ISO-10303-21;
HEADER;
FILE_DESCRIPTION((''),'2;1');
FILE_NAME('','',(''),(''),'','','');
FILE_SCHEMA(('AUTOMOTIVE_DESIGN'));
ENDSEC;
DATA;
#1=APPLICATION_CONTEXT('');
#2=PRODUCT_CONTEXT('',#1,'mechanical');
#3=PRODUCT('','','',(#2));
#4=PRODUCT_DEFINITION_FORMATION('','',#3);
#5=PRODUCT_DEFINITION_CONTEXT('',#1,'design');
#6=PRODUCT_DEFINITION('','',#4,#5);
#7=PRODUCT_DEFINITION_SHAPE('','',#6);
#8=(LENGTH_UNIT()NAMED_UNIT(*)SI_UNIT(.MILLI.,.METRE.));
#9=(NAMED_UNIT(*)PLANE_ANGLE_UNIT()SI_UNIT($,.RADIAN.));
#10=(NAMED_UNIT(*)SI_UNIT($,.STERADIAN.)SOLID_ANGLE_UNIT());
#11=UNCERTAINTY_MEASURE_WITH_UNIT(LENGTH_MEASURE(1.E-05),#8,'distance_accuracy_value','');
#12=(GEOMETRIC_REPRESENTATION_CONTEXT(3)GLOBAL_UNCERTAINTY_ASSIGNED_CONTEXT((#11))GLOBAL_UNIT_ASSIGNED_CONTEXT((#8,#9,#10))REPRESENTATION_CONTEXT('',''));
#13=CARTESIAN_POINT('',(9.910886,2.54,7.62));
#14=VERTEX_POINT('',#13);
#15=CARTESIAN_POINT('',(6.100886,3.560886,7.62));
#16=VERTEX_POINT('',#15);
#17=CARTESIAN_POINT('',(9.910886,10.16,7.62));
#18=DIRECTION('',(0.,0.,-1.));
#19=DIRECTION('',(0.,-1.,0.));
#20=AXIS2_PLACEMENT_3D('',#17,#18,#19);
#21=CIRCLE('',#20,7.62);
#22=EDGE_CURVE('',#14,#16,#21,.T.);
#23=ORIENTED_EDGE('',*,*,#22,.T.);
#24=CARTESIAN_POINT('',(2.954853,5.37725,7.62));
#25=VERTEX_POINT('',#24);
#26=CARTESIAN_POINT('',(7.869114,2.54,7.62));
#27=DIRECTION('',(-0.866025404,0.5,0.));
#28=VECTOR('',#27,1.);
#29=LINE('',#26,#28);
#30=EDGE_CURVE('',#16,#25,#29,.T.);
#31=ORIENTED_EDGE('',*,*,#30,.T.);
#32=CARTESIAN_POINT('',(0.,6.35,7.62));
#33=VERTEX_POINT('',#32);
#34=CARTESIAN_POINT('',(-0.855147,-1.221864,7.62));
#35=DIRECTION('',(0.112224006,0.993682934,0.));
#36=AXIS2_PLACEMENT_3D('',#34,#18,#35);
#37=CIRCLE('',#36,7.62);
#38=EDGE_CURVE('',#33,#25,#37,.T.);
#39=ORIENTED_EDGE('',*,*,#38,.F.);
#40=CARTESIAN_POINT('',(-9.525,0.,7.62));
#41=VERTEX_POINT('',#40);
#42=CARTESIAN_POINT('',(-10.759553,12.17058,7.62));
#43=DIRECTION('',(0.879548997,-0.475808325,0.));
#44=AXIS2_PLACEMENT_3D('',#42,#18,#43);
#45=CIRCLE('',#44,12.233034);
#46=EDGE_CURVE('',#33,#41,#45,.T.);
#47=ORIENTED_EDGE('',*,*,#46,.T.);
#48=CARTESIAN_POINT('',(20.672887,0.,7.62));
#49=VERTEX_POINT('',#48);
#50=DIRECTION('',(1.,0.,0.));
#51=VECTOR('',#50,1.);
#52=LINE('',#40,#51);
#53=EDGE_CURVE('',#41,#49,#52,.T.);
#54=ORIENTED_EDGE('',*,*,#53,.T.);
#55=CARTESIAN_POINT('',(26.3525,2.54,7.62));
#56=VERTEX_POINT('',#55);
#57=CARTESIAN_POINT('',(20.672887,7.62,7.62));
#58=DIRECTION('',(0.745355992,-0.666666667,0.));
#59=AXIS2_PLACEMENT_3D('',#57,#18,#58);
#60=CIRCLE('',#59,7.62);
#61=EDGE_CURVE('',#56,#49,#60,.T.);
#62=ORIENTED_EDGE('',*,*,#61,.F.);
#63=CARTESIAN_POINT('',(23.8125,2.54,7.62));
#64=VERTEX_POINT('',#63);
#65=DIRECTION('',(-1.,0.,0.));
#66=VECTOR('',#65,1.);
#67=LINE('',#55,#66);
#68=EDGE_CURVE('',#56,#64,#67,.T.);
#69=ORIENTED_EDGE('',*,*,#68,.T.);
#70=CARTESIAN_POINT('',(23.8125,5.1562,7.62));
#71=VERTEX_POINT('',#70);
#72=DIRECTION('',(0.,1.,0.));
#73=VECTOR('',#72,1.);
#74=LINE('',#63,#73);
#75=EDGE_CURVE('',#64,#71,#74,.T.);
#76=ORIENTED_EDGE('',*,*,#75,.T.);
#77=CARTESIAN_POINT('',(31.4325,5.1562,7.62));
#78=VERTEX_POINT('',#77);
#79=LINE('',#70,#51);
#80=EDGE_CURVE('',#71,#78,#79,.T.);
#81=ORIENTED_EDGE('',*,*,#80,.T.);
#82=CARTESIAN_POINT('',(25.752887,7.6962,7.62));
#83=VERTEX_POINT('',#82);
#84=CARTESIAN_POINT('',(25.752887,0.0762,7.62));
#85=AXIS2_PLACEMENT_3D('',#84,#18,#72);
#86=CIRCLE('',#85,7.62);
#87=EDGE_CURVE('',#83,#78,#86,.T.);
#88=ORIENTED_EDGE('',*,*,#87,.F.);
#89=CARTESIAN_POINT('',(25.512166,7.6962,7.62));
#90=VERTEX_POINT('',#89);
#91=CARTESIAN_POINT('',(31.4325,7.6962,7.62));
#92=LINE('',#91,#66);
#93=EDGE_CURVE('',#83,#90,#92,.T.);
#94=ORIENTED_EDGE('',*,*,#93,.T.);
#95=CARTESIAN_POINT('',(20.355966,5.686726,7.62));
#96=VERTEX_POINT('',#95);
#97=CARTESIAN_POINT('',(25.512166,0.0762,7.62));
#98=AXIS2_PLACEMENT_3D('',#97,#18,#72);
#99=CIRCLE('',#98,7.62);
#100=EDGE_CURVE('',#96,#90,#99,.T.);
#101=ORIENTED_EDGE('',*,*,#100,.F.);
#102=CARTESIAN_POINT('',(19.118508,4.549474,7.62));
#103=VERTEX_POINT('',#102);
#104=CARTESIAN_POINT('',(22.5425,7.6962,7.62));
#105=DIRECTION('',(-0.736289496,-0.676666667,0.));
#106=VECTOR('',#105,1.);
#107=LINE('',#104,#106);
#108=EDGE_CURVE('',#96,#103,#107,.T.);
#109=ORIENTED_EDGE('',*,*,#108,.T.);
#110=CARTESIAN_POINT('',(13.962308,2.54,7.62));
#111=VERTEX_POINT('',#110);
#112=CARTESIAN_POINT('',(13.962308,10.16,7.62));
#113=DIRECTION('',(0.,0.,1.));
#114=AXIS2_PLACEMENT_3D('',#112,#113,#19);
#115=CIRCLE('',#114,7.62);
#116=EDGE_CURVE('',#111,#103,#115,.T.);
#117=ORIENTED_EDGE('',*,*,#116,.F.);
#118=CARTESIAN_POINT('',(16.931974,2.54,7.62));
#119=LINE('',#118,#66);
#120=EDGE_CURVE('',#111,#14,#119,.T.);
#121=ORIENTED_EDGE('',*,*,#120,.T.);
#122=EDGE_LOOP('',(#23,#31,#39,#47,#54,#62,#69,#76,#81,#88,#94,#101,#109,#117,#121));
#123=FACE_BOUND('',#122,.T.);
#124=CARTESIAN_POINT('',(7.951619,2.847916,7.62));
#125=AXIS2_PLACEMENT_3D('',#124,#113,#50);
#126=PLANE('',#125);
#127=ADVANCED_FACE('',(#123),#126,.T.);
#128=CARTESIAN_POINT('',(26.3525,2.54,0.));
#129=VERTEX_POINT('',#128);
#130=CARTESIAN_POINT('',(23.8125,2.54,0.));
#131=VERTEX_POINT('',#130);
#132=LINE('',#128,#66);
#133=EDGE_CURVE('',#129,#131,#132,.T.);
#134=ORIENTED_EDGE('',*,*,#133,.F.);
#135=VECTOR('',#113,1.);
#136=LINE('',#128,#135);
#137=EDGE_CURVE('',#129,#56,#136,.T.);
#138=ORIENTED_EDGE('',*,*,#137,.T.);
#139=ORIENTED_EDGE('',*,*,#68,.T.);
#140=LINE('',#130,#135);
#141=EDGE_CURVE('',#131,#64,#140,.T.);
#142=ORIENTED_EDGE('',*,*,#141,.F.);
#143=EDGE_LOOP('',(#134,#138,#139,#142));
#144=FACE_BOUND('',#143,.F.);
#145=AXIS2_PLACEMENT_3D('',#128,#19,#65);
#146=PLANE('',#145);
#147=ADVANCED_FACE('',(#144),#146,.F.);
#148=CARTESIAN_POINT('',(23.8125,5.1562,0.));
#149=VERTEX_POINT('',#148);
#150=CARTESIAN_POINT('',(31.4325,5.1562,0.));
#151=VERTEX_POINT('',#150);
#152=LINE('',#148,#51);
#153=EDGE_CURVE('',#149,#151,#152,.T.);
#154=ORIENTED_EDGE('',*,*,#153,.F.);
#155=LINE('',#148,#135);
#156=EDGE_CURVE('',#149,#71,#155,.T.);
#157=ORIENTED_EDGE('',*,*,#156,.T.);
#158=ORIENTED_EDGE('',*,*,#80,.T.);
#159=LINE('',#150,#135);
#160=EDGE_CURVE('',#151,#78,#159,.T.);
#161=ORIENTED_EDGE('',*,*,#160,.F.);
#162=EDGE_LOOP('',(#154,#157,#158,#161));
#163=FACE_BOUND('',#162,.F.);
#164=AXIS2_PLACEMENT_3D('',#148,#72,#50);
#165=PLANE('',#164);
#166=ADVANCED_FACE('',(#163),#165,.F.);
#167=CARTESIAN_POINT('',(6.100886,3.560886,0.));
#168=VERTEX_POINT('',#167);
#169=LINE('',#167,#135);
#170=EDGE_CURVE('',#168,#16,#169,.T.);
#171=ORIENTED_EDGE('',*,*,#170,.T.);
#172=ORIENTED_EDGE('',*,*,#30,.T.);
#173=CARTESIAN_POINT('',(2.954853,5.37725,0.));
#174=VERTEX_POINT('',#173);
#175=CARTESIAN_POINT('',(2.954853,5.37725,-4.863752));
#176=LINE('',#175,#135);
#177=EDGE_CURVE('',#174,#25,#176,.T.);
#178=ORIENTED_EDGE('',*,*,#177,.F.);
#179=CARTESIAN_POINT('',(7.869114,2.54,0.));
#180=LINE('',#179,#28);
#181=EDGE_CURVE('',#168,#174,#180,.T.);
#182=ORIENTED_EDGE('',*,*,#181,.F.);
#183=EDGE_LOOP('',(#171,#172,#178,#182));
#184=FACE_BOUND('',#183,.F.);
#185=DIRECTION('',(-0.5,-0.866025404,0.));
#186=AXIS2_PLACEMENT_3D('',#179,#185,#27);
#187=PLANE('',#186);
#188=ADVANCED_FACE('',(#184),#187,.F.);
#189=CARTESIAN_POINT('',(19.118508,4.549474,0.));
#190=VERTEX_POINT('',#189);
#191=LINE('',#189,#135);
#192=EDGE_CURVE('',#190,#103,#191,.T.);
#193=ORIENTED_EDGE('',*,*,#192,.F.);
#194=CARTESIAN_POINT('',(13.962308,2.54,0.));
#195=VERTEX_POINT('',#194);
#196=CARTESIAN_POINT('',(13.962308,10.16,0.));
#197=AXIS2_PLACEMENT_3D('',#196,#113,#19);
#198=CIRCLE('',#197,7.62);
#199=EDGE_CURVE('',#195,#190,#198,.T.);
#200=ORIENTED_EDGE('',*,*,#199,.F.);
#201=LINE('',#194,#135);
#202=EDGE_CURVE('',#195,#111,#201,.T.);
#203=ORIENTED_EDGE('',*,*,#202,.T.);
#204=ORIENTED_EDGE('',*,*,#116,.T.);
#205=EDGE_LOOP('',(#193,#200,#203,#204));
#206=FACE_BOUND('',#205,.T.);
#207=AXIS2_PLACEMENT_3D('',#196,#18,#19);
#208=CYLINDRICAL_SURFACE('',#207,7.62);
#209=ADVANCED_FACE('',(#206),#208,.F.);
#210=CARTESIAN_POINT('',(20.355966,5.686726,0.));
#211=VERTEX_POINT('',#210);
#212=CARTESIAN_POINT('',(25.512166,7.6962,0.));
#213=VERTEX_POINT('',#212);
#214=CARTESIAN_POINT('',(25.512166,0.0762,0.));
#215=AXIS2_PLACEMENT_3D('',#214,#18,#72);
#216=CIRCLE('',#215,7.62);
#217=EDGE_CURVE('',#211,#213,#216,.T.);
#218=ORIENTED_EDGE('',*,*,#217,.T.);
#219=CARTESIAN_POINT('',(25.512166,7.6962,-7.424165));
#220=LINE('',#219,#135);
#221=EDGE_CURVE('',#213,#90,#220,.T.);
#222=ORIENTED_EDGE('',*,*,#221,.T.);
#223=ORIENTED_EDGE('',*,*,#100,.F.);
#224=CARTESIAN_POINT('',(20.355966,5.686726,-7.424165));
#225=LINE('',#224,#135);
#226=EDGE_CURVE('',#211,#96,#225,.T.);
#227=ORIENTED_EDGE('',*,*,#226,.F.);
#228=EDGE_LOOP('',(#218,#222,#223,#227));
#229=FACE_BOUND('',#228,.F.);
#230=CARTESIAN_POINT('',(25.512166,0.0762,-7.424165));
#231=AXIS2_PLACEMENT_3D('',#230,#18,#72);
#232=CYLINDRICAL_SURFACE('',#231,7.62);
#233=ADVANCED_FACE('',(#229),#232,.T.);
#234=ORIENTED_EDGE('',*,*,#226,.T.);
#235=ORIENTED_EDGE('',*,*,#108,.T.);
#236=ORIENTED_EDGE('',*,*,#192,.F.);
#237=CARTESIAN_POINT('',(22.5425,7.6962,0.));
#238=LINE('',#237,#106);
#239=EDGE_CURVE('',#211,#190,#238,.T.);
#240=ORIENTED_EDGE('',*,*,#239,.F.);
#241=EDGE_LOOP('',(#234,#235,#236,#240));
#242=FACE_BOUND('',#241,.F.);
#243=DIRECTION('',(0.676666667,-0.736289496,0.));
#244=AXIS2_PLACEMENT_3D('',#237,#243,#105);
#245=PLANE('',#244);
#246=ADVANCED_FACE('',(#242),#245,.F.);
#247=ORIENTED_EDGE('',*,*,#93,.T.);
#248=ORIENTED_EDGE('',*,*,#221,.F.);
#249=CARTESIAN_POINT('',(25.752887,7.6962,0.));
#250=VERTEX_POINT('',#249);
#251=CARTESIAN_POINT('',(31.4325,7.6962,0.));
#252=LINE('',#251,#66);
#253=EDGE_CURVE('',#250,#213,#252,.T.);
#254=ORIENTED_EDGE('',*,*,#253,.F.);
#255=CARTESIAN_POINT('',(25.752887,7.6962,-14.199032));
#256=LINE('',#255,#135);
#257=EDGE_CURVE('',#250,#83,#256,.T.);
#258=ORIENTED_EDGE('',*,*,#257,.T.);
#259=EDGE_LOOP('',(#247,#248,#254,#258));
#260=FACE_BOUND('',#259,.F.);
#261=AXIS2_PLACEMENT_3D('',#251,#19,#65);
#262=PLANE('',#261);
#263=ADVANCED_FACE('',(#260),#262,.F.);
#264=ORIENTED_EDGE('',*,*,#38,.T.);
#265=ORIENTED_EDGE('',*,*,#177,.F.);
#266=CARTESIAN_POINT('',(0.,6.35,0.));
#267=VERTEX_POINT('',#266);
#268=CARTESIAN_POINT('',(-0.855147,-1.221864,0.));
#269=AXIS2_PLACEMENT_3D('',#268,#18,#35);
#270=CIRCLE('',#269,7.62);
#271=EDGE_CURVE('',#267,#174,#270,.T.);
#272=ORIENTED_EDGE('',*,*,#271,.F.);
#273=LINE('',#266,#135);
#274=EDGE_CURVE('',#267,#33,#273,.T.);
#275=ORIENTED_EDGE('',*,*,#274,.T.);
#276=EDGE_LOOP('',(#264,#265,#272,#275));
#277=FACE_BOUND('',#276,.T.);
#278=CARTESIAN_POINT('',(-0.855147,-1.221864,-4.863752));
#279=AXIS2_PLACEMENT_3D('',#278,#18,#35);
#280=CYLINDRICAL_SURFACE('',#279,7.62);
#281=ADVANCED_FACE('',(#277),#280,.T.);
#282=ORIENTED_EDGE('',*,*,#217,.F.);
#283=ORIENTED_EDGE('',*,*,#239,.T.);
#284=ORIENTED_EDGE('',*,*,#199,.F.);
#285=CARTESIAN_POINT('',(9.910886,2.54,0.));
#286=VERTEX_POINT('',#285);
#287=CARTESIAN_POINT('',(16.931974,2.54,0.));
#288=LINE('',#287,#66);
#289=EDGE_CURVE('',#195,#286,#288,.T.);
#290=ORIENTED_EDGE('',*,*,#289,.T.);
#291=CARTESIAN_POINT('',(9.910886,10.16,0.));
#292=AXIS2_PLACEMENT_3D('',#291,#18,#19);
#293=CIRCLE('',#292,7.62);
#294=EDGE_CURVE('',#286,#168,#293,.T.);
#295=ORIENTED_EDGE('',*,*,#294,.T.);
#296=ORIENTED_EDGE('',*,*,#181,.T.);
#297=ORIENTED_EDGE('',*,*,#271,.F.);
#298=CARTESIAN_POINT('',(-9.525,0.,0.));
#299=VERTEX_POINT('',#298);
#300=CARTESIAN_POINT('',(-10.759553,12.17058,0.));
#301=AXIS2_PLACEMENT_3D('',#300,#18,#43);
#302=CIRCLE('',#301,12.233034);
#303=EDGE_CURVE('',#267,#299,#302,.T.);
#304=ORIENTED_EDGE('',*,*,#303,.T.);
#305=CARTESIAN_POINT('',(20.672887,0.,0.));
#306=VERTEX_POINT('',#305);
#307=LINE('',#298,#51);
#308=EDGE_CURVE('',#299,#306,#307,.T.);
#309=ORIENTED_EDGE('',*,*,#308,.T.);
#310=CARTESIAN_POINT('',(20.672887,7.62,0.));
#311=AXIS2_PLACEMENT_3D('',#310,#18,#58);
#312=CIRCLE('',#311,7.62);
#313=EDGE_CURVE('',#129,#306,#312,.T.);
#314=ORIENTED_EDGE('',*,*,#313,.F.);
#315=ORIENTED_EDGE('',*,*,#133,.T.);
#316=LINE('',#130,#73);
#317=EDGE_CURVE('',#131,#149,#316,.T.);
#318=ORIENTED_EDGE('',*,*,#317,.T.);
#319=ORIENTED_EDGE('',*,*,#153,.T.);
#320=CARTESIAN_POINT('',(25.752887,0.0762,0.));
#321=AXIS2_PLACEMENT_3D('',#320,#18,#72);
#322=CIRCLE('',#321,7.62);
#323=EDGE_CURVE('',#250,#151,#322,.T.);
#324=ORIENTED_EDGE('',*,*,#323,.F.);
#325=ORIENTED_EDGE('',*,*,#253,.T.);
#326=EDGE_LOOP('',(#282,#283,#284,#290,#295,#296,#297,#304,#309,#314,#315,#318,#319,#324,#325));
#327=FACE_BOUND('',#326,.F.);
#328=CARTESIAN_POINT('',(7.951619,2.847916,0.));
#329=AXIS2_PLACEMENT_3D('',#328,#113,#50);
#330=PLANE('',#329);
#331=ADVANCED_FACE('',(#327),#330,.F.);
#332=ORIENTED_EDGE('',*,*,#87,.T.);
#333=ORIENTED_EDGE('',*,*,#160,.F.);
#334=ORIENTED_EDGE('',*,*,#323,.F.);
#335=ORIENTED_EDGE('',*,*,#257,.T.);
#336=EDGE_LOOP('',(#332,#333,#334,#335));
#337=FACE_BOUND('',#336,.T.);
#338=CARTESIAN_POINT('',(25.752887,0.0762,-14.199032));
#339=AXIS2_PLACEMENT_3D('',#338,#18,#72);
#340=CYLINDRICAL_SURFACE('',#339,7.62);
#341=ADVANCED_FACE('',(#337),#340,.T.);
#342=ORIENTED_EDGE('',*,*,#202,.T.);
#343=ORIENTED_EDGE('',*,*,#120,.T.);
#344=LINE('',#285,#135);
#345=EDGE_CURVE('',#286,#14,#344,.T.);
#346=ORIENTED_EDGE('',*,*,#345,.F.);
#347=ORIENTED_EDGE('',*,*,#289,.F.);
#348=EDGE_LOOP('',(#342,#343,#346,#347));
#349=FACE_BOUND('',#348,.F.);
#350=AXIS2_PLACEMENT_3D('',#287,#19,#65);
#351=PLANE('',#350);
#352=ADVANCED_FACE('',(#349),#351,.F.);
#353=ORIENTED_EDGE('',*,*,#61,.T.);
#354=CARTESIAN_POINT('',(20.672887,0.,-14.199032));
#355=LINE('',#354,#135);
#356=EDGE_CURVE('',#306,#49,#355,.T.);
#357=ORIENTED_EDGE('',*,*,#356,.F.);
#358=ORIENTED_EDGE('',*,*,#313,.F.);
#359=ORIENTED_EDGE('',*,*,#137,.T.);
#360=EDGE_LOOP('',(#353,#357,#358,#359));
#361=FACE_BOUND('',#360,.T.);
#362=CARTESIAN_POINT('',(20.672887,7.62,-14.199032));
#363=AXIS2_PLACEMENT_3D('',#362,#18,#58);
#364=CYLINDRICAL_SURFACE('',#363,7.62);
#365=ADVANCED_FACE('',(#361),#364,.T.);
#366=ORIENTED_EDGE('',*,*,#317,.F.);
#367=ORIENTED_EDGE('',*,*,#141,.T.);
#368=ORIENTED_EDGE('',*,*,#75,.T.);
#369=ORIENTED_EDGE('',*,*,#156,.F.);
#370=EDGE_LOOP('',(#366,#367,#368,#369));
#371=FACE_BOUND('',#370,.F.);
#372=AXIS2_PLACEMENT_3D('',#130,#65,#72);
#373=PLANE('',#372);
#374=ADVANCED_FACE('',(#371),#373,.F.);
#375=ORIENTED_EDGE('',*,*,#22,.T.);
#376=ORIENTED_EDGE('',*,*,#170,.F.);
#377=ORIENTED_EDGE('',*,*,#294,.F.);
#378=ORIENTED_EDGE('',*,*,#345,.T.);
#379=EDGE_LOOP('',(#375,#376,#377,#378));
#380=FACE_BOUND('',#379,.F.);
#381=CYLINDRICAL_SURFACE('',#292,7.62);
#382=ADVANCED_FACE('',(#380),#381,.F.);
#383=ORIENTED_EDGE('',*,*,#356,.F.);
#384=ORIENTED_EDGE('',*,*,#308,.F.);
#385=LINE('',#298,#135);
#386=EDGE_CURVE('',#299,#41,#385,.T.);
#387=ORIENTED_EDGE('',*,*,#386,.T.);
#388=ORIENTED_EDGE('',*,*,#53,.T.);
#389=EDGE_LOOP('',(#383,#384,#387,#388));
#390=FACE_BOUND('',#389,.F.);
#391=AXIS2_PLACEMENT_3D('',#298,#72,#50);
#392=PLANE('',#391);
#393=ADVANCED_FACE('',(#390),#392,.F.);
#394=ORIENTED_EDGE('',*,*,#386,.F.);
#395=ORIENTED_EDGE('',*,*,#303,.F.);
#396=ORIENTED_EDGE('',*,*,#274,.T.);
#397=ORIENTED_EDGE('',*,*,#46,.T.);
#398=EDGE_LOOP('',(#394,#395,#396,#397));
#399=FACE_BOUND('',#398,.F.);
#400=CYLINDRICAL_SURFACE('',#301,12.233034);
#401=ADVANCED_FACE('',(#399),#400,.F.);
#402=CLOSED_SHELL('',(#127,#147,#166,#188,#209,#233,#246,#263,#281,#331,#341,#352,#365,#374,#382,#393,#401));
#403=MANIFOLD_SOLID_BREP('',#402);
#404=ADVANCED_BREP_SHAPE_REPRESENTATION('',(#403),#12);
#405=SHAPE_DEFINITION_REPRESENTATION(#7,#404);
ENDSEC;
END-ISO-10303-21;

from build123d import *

# Parameters (mm, degrees)
F1_DEPTH    = 7.62
F2_T1_DEPTH = 7.62
F2_T3_DEPTH = 7.62
F2_T5_DEPTH = 22.4683303368
F2_T7_DEPTH = 17.3475037725
F3_T1_DEPTH = 36.0180633142


# Not quite as in the source:
# - a fillet or chamfer that OpenCascade refuses, or shapes differently, is made with other operations: its cross-section is extruded or revolved along the edge and cut away or added


with BuildPart() as f1:
    # F0 (on Top) → F1 (new body)
    with BuildSketch(Plane.XY):
        with BuildLine():
            Line((-9.525, 0), (0, 0))
            Line((0, 0), (23.8125, 0))
            Line((23.8125, 0), (26.3525, 0))
            Line((26.3525, 0), (26.3525, 2.54))
            Line((26.3525, 2.54), (23.8125, 2.54))
            Line((23.8125, 2.54), (23.8125, 5.1562))
            Line((23.8125, 5.1562), (31.4325, 5.1562))
            Line((31.4325, 5.1562), (31.4325, 7.6962))
            Line((31.4325, 7.6962), (22.5425, 7.6962))
            Line((22.5425, 7.6962), (16.9319740389, 2.54))
            Line((16.9319740389, 2.54), (7.8691135768, 2.54))
            Line((7.8691135768, 2.54), (1.27, 6.35))
            Line((1.27, 6.35), (0, 6.35))
            ThreePointArc((0, 6.35), (-3.9738865155, 1.9920797732), (-9.525, 0))
        make_face()
    extrude(amount=F1_DEPTH)

    # F2: fillet of radius 7.62 on 4 edges, made by hand

    # F2_s2 → F2_t1 (join)
    with BuildSketch(Plane.XY):
        with BuildLine():
            ThreePointArc((13.9623079716, 2.54), (16.729273112, 3.0601194438), (19.1185079716, 4.5494740389))
            Line((19.1185079716, 4.5494740389), (16.9319740389, 2.54))
            Line((16.9319740389, 2.54), (13.9623079716, 2.54))
        make_face()
    extrude(amount=F2_T1_DEPTH)

    # F2_s4 → F2_t3 (join)
    with BuildSketch(Plane.XY):
        with BuildLine():
            ThreePointArc((9.9108864232, 2.54), (7.9386852995, 2.7996452037), (6.1008864232, 3.5608864232))
            Line((6.1008864232, 3.5608864232), (7.8691135768, 2.54))
            Line((7.8691135768, 2.54), (9.9108864232, 2.54))
        make_face()
    extrude(amount=F2_T3_DEPTH)

    # F2_s6 → F2_t5 (cut)
    with BuildSketch(Plane.XY.offset(-7.4241651684)):
        with BuildLine():
            ThreePointArc((25.5121660674, 7.6962), (22.7452009269, 7.1760805562), (20.3559660674, 5.6867259611))
            Line((20.3559660674, 5.6867259611), (22.5425, 7.6962))
            Line((22.5425, 7.6962), (25.5121660674, 7.6962))
        make_face()
    extrude(amount=F2_T5_DEPTH, mode=Mode.SUBTRACT)

    # F2_s8 → F2_t7 (cut)
    with BuildSketch(Plane.XY.offset(-4.8637518862)):
        with BuildLine():
            ThreePointArc((0, 6.35), (1.5275951478, 6.0160183482), (2.9548530765, 5.3772496228))
            Line((2.9548530765, 5.3772496228), (1.27, 6.35))
            Line((1.27, 6.35), (0, 6.35))
        make_face()
    extrude(amount=F2_T7_DEPTH, mode=Mode.SUBTRACT)

    # F3: fillet of radius 7.62 on 2 edges, made by hand

    # F3_s2 → F3_t1 (cut)
    with BuildSketch(Plane.XY.offset(-14.1990316571)):
        with BuildLine():
            ThreePointArc((25.7528873372, 7.6962), (28.8637393105, 7.0322764803), (31.4325, 5.1562))
            Line((31.4325, 5.1562), (31.4325, 7.6962))
            Line((31.4325, 7.6962), (25.7528873372, 7.6962))
        make_face()
        with BuildLine():
            ThreePointArc((26.3525, 2.54), (23.7837393105, 0.6639235197), (20.6728873372, 0))
            Line((20.6728873372, 0), (26.3525, 0))
            Line((26.3525, 0), (26.3525, 2.54))
        make_face()
    extrude(amount=F3_T1_DEPTH, mode=Mode.SUBTRACT)


solid = f1.part
